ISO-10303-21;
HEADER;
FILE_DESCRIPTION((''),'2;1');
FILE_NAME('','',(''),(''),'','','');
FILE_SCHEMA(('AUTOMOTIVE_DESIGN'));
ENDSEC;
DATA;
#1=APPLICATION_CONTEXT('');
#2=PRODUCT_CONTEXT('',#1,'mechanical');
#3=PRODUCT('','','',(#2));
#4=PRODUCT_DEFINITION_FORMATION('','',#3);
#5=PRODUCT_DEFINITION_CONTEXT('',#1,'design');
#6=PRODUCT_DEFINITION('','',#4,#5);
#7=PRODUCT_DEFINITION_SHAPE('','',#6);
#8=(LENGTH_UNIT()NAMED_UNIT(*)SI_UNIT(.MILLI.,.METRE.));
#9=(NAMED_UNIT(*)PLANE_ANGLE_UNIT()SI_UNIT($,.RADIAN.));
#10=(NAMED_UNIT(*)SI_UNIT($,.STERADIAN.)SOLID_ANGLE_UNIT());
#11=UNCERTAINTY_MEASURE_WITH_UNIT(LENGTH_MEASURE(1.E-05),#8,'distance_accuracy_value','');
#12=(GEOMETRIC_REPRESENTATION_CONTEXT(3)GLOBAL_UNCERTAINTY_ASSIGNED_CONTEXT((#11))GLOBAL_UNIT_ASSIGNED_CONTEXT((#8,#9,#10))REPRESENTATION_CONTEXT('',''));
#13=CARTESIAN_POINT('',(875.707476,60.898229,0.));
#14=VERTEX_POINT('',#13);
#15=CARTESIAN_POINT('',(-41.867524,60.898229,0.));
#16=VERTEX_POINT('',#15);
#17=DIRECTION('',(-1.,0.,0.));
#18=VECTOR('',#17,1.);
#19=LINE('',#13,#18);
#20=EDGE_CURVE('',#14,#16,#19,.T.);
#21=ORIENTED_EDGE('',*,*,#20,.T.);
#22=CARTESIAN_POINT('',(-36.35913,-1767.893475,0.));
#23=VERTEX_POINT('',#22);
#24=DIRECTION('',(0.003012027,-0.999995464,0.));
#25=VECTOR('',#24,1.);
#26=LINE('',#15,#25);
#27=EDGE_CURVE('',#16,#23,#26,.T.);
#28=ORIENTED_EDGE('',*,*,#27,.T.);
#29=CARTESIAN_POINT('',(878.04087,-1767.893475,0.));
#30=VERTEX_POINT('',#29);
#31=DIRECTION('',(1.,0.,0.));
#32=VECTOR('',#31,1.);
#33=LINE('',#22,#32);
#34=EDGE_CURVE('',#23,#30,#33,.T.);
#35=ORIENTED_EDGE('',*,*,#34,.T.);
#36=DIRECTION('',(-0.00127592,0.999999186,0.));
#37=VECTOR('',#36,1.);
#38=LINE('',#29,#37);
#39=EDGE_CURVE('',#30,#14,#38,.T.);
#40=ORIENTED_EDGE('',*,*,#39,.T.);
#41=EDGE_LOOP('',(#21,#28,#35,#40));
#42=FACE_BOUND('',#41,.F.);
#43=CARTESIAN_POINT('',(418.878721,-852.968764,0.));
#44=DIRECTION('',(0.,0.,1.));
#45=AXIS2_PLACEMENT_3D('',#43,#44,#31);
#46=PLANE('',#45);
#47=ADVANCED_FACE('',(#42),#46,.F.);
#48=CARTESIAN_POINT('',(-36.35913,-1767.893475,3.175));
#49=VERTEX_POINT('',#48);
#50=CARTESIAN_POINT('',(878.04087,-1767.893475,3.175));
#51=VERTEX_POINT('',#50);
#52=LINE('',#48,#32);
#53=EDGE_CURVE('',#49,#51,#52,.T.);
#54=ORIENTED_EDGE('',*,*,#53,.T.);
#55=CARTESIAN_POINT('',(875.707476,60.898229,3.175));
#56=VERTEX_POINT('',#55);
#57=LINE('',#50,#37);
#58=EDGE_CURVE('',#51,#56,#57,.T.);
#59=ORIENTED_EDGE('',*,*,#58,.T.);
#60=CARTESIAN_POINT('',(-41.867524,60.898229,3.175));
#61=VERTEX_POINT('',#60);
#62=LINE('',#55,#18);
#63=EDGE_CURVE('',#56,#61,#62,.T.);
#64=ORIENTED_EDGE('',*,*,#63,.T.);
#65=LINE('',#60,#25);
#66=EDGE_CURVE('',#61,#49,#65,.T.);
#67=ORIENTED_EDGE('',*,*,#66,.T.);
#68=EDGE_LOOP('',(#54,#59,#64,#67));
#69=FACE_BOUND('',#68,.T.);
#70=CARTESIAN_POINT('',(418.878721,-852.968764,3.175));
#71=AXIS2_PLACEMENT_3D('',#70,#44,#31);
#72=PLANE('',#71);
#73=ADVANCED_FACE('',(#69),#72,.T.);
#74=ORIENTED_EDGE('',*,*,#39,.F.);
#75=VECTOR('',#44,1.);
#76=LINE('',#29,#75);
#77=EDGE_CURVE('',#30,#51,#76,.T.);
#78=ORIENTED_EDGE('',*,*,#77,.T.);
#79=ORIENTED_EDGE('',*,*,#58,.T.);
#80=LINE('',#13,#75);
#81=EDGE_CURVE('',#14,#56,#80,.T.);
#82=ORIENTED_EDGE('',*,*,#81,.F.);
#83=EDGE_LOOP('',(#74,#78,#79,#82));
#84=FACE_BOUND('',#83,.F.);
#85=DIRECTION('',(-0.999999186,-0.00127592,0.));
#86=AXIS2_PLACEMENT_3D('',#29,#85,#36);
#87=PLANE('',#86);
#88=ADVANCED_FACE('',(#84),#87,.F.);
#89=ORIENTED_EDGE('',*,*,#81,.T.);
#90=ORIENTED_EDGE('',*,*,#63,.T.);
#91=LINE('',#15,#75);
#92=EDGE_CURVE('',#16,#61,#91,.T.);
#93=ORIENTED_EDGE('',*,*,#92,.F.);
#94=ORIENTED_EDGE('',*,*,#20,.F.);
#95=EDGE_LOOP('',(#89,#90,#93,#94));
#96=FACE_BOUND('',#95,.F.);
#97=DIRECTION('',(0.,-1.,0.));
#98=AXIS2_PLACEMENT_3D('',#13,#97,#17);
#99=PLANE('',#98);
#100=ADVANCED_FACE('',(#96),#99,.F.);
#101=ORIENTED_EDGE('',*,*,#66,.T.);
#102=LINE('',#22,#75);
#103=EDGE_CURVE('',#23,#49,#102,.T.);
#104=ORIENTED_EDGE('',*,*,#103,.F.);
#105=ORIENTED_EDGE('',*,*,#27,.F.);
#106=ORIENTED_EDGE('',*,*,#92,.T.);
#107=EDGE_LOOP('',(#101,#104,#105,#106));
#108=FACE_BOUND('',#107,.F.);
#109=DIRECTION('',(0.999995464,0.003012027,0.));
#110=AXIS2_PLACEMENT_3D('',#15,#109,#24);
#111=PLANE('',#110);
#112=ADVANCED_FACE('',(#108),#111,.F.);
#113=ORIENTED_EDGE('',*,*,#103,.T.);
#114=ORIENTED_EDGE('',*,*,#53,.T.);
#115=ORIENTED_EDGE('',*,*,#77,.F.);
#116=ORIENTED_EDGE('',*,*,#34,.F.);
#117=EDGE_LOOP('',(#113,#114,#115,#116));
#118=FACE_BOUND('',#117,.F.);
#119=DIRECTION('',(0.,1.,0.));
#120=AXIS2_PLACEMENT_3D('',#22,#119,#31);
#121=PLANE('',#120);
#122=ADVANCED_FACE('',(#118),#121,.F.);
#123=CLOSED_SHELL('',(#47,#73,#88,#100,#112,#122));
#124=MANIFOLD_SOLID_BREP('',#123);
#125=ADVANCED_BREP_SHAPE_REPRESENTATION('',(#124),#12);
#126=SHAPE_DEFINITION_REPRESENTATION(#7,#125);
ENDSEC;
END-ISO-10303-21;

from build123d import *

# Parameters (mm, degrees)
F1_DEPTH = 3.175


# Not quite as in the source:
# - a length typed as a fraction of an inch, garbled in the dataset ("3 / 203.2 mm" for 3/8 in), is restored


with BuildPart() as f1:
    # F0 (on Top) → F1 (new body)
    with BuildSketch(Plane.XY):
        Polygon((-41.8675243855, 60.8982294798), (-36.3591299281, -1767.8934747858), (878.0408700719, -1767.8934747858), (875.7074756145, 60.8982294798), align=None)
    extrude(amount=F1_DEPTH)


solid = f1.part
